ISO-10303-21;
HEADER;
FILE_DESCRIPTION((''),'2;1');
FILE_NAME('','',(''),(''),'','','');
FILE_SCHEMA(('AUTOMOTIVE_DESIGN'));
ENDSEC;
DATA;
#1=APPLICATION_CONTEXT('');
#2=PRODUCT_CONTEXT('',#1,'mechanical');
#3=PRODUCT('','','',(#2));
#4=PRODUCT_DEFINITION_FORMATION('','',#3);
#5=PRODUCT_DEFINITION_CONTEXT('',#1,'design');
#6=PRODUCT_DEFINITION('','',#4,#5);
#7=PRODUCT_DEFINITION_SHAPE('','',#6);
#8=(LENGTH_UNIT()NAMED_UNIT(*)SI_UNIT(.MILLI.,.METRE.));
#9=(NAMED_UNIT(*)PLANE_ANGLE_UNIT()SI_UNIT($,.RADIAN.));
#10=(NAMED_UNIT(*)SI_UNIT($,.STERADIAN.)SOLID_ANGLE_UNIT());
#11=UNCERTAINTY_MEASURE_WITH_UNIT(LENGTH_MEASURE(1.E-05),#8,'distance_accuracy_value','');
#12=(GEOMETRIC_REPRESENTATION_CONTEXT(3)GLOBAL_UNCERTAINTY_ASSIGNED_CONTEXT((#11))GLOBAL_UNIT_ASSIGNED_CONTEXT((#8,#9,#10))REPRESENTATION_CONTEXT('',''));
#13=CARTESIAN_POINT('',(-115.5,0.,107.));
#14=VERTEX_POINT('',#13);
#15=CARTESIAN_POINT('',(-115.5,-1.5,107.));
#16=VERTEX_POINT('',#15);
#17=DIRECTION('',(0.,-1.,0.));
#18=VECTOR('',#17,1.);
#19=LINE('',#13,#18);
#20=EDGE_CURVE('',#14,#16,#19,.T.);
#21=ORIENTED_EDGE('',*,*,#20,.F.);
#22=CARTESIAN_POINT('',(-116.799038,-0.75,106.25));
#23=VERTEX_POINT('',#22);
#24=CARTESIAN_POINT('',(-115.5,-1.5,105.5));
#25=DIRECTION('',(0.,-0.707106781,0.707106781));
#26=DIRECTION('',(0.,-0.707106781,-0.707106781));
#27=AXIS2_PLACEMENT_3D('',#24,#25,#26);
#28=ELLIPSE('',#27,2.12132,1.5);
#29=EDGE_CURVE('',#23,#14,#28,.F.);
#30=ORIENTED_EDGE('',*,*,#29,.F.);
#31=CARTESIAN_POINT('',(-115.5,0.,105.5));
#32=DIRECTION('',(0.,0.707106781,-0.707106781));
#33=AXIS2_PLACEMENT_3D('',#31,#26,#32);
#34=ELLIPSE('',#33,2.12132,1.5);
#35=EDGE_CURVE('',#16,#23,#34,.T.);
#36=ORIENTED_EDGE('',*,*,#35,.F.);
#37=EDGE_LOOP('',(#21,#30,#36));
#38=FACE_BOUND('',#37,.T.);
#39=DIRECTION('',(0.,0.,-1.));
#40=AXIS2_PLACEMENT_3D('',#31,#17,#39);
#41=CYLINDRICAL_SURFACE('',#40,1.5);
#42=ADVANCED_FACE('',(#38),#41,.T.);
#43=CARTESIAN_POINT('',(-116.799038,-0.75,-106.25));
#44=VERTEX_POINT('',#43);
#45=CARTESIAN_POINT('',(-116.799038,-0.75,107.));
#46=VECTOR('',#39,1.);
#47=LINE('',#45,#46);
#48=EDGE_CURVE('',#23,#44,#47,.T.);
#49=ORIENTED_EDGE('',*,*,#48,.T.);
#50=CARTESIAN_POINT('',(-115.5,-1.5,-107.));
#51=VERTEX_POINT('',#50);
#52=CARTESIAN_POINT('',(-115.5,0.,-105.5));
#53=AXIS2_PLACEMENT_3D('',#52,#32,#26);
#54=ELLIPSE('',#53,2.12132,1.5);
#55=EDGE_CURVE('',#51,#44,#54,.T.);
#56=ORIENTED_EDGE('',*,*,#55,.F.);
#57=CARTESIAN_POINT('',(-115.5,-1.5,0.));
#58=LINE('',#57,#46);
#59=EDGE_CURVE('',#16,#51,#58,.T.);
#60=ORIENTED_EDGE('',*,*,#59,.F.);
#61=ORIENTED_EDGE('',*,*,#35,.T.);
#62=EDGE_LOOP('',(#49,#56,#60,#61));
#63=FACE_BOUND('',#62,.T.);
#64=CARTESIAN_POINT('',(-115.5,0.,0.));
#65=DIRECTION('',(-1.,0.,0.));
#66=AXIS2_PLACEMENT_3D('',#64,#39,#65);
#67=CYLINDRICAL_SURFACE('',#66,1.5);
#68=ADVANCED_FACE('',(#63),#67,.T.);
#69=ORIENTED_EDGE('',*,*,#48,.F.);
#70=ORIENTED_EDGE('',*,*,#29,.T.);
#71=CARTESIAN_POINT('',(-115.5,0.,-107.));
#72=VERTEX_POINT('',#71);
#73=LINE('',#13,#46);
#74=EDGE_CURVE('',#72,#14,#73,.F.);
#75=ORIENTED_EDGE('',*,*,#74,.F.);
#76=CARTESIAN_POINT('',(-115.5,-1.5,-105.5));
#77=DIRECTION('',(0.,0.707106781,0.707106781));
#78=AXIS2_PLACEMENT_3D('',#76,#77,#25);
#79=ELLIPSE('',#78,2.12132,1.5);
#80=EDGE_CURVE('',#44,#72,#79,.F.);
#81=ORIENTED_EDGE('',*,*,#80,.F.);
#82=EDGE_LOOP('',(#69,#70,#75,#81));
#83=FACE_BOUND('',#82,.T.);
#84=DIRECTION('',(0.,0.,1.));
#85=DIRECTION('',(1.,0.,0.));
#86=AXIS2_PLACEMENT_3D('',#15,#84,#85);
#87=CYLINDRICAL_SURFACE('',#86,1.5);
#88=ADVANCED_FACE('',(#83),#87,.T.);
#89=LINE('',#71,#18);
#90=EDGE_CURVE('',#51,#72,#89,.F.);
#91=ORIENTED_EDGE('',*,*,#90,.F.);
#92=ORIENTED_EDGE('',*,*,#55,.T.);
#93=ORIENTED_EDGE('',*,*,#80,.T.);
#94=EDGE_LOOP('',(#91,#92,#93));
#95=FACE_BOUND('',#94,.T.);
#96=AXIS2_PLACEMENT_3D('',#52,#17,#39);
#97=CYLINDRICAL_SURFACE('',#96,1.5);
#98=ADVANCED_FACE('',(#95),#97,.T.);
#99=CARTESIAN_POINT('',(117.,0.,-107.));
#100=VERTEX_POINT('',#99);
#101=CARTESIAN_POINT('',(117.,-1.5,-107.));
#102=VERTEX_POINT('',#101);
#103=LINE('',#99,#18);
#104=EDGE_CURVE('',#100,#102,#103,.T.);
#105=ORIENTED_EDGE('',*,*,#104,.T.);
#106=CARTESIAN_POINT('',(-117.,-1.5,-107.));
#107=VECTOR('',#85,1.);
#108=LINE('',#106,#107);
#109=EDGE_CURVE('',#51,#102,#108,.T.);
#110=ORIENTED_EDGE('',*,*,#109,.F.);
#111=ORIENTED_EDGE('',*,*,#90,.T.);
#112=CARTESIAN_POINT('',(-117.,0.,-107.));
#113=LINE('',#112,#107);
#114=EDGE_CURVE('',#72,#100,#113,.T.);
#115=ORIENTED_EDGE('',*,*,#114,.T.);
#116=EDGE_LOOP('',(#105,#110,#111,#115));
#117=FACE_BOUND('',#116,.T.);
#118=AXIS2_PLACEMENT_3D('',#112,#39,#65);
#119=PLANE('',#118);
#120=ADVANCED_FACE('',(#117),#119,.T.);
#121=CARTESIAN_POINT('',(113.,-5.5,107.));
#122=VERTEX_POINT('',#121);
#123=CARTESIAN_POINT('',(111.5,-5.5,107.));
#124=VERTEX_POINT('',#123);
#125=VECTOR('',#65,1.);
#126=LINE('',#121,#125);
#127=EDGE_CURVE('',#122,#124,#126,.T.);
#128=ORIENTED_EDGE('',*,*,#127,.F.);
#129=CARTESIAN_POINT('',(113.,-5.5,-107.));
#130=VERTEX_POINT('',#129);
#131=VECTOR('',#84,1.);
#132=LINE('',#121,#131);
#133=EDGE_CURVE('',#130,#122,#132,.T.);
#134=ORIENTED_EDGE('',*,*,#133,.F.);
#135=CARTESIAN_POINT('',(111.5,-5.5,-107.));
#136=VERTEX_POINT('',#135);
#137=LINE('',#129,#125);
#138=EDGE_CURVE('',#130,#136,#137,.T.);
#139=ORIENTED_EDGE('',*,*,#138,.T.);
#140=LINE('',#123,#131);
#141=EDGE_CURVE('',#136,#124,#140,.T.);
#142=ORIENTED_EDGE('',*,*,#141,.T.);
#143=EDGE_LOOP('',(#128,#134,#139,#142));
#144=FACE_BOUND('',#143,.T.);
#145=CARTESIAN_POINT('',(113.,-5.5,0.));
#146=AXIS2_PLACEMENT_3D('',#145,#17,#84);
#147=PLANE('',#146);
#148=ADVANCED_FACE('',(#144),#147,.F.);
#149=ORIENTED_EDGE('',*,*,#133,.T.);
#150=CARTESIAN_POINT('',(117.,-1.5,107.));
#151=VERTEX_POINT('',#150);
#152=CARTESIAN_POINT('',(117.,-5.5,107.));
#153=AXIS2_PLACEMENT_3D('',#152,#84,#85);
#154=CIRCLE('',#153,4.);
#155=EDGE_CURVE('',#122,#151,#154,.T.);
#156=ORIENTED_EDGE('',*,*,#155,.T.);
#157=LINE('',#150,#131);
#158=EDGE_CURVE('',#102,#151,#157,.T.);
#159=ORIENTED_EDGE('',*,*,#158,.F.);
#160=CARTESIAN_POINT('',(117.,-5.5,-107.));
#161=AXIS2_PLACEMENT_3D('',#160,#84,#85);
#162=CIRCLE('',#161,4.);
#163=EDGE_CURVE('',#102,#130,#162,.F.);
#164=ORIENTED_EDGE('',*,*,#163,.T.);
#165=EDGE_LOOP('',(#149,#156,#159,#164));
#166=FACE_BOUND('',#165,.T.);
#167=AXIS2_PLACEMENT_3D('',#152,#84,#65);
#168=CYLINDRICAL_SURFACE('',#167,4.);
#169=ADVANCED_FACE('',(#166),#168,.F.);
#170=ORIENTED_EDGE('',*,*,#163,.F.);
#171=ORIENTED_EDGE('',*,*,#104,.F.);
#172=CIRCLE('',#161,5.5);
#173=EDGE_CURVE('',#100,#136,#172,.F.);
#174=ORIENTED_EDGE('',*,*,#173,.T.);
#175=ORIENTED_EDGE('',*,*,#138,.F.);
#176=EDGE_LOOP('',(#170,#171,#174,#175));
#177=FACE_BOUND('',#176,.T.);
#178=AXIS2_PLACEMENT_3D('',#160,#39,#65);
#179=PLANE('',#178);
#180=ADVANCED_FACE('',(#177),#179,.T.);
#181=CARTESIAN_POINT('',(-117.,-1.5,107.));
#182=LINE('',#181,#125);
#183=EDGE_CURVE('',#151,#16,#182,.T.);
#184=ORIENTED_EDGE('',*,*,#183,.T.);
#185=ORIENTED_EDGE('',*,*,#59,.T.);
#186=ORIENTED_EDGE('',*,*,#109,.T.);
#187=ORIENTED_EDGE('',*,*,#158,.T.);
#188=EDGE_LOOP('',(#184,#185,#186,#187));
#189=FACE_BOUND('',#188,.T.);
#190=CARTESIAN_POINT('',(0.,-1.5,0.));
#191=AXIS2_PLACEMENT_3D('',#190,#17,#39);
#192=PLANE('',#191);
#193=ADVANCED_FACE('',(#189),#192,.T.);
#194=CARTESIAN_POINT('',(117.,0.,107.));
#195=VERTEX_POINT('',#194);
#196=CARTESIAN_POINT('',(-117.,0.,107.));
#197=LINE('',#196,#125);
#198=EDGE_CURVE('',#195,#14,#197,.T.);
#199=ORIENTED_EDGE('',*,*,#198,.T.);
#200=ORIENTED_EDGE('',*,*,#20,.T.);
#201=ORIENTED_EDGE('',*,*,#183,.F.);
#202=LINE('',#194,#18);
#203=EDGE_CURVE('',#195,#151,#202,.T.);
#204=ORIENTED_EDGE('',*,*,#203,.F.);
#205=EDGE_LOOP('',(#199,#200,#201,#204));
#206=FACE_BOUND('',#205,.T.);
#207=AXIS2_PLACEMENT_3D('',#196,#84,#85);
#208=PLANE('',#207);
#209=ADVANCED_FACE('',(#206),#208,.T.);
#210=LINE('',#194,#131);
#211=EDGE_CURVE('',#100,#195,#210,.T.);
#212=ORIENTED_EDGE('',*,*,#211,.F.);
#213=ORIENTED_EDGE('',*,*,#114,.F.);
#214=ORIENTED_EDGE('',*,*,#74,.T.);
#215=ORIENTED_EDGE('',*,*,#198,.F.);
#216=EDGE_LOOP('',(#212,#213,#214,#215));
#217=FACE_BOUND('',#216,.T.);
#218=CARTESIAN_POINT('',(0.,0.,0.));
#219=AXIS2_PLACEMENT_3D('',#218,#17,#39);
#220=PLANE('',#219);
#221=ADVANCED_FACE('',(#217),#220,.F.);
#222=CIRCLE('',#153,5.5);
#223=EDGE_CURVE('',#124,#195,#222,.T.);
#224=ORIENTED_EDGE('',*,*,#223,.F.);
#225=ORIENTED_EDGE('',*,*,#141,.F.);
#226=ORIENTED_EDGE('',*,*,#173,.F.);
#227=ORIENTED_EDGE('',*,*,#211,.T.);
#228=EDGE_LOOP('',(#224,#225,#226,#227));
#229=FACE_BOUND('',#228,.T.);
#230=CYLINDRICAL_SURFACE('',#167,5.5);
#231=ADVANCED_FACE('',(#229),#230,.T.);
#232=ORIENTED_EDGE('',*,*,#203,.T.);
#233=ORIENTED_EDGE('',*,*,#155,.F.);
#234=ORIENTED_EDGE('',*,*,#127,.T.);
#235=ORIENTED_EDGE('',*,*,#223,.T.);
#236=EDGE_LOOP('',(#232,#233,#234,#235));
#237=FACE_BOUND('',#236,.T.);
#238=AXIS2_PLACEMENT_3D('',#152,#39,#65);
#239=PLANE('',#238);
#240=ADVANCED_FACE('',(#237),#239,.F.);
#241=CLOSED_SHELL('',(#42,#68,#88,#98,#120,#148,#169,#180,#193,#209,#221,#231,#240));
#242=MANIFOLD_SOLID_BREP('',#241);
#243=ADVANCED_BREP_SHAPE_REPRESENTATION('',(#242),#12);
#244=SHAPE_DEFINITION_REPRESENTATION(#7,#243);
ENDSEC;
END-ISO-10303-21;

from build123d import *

# Parameters (mm, degrees)
SKETCH_1_W             = 234
SKETCH_1_H             = 214
SM_BASE_FLANGE_1_DEPTH = 1.5
OTHER_START            = -107
OTHER_1_DEPTH          = 214
FILLET_3_R             = 1.5


# Read off the part's stored shape, not the designer's step: Каемка1
# Sheet-metal steps are written as plain solids
with BuildPart() as part:
    # Sketch 1 → Базовая кромка1 (new body)
    with BuildSketch(Plane.XZ.offset(1.5)):
        Rectangle(SKETCH_1_W, SKETCH_1_H)
    extrude(amount=-SM_BASE_FLANGE_1_DEPTH)

    # Other 1 outline → Other 1 (add)
    with BuildSketch(Plane.XY.offset(OTHER_START)):
        with BuildLine():
            Line((113, -5.5), (111.5, -5.5))
            ThreePointArc((111.5, -5.5), (120.889087297, -9.389087297), (117, 0))
            Line((117, 0), (117, -1.5))
            ThreePointArc((117, -1.5), (119.828427125, -8.328427125), (113, -5.5))
        make_face()
    extrude(amount=OTHER_1_DEPTH)

    # Скругление3
    # the kernel refuses this fillet: 1.5 mm, written as the material it takes off along each edge
    with BuildSketch(Plane(origin=(-117, 0, -110.75), x_dir=(0, -1, 0), z_dir=(0, 0, 1))) as fillet_3_piece_1:
        with BuildLine():
            CenterArc((FILLET_3_R, FILLET_3_R), FILLET_3_R, 180, 90)
            Line((0, FILLET_3_R), (0, 0))
            Line((0, 0), (FILLET_3_R, 0))
        make_face()
    extrude(amount=221.5, mode=Mode.SUBTRACT)
    with BuildSketch(Plane(origin=(-117, -1.5, -110.75), x_dir=(0, 1, 0), z_dir=(0, 0, 1))) as fillet_3_piece_2:
        with BuildLine():
            CenterArc((FILLET_3_R, -FILLET_3_R), FILLET_3_R, 90, 90)
            Line((0, -FILLET_3_R), (0, 0))
            Line((0, 0), (FILLET_3_R, 0))
        make_face()
    extrude(amount=221.5, mode=Mode.SUBTRACT)
    with BuildSketch(Plane(origin=(-117, -5.25, -107), x_dir=(0, 0, 1), z_dir=(0, 1, 0)), Plane(origin=(-117, -5.25, 107), x_dir=(1, 0, 0), z_dir=(0, 1, 0))) as fillet_3_piece_3:
        with BuildLine():
            CenterArc((FILLET_3_R, FILLET_3_R), FILLET_3_R, 180, 90)
            Line((0, FILLET_3_R), (0, 0))
            Line((0, 0), (FILLET_3_R, 0))
        make_face()
    extrude(amount=9, mode=Mode.SUBTRACT)


solid = part.part
